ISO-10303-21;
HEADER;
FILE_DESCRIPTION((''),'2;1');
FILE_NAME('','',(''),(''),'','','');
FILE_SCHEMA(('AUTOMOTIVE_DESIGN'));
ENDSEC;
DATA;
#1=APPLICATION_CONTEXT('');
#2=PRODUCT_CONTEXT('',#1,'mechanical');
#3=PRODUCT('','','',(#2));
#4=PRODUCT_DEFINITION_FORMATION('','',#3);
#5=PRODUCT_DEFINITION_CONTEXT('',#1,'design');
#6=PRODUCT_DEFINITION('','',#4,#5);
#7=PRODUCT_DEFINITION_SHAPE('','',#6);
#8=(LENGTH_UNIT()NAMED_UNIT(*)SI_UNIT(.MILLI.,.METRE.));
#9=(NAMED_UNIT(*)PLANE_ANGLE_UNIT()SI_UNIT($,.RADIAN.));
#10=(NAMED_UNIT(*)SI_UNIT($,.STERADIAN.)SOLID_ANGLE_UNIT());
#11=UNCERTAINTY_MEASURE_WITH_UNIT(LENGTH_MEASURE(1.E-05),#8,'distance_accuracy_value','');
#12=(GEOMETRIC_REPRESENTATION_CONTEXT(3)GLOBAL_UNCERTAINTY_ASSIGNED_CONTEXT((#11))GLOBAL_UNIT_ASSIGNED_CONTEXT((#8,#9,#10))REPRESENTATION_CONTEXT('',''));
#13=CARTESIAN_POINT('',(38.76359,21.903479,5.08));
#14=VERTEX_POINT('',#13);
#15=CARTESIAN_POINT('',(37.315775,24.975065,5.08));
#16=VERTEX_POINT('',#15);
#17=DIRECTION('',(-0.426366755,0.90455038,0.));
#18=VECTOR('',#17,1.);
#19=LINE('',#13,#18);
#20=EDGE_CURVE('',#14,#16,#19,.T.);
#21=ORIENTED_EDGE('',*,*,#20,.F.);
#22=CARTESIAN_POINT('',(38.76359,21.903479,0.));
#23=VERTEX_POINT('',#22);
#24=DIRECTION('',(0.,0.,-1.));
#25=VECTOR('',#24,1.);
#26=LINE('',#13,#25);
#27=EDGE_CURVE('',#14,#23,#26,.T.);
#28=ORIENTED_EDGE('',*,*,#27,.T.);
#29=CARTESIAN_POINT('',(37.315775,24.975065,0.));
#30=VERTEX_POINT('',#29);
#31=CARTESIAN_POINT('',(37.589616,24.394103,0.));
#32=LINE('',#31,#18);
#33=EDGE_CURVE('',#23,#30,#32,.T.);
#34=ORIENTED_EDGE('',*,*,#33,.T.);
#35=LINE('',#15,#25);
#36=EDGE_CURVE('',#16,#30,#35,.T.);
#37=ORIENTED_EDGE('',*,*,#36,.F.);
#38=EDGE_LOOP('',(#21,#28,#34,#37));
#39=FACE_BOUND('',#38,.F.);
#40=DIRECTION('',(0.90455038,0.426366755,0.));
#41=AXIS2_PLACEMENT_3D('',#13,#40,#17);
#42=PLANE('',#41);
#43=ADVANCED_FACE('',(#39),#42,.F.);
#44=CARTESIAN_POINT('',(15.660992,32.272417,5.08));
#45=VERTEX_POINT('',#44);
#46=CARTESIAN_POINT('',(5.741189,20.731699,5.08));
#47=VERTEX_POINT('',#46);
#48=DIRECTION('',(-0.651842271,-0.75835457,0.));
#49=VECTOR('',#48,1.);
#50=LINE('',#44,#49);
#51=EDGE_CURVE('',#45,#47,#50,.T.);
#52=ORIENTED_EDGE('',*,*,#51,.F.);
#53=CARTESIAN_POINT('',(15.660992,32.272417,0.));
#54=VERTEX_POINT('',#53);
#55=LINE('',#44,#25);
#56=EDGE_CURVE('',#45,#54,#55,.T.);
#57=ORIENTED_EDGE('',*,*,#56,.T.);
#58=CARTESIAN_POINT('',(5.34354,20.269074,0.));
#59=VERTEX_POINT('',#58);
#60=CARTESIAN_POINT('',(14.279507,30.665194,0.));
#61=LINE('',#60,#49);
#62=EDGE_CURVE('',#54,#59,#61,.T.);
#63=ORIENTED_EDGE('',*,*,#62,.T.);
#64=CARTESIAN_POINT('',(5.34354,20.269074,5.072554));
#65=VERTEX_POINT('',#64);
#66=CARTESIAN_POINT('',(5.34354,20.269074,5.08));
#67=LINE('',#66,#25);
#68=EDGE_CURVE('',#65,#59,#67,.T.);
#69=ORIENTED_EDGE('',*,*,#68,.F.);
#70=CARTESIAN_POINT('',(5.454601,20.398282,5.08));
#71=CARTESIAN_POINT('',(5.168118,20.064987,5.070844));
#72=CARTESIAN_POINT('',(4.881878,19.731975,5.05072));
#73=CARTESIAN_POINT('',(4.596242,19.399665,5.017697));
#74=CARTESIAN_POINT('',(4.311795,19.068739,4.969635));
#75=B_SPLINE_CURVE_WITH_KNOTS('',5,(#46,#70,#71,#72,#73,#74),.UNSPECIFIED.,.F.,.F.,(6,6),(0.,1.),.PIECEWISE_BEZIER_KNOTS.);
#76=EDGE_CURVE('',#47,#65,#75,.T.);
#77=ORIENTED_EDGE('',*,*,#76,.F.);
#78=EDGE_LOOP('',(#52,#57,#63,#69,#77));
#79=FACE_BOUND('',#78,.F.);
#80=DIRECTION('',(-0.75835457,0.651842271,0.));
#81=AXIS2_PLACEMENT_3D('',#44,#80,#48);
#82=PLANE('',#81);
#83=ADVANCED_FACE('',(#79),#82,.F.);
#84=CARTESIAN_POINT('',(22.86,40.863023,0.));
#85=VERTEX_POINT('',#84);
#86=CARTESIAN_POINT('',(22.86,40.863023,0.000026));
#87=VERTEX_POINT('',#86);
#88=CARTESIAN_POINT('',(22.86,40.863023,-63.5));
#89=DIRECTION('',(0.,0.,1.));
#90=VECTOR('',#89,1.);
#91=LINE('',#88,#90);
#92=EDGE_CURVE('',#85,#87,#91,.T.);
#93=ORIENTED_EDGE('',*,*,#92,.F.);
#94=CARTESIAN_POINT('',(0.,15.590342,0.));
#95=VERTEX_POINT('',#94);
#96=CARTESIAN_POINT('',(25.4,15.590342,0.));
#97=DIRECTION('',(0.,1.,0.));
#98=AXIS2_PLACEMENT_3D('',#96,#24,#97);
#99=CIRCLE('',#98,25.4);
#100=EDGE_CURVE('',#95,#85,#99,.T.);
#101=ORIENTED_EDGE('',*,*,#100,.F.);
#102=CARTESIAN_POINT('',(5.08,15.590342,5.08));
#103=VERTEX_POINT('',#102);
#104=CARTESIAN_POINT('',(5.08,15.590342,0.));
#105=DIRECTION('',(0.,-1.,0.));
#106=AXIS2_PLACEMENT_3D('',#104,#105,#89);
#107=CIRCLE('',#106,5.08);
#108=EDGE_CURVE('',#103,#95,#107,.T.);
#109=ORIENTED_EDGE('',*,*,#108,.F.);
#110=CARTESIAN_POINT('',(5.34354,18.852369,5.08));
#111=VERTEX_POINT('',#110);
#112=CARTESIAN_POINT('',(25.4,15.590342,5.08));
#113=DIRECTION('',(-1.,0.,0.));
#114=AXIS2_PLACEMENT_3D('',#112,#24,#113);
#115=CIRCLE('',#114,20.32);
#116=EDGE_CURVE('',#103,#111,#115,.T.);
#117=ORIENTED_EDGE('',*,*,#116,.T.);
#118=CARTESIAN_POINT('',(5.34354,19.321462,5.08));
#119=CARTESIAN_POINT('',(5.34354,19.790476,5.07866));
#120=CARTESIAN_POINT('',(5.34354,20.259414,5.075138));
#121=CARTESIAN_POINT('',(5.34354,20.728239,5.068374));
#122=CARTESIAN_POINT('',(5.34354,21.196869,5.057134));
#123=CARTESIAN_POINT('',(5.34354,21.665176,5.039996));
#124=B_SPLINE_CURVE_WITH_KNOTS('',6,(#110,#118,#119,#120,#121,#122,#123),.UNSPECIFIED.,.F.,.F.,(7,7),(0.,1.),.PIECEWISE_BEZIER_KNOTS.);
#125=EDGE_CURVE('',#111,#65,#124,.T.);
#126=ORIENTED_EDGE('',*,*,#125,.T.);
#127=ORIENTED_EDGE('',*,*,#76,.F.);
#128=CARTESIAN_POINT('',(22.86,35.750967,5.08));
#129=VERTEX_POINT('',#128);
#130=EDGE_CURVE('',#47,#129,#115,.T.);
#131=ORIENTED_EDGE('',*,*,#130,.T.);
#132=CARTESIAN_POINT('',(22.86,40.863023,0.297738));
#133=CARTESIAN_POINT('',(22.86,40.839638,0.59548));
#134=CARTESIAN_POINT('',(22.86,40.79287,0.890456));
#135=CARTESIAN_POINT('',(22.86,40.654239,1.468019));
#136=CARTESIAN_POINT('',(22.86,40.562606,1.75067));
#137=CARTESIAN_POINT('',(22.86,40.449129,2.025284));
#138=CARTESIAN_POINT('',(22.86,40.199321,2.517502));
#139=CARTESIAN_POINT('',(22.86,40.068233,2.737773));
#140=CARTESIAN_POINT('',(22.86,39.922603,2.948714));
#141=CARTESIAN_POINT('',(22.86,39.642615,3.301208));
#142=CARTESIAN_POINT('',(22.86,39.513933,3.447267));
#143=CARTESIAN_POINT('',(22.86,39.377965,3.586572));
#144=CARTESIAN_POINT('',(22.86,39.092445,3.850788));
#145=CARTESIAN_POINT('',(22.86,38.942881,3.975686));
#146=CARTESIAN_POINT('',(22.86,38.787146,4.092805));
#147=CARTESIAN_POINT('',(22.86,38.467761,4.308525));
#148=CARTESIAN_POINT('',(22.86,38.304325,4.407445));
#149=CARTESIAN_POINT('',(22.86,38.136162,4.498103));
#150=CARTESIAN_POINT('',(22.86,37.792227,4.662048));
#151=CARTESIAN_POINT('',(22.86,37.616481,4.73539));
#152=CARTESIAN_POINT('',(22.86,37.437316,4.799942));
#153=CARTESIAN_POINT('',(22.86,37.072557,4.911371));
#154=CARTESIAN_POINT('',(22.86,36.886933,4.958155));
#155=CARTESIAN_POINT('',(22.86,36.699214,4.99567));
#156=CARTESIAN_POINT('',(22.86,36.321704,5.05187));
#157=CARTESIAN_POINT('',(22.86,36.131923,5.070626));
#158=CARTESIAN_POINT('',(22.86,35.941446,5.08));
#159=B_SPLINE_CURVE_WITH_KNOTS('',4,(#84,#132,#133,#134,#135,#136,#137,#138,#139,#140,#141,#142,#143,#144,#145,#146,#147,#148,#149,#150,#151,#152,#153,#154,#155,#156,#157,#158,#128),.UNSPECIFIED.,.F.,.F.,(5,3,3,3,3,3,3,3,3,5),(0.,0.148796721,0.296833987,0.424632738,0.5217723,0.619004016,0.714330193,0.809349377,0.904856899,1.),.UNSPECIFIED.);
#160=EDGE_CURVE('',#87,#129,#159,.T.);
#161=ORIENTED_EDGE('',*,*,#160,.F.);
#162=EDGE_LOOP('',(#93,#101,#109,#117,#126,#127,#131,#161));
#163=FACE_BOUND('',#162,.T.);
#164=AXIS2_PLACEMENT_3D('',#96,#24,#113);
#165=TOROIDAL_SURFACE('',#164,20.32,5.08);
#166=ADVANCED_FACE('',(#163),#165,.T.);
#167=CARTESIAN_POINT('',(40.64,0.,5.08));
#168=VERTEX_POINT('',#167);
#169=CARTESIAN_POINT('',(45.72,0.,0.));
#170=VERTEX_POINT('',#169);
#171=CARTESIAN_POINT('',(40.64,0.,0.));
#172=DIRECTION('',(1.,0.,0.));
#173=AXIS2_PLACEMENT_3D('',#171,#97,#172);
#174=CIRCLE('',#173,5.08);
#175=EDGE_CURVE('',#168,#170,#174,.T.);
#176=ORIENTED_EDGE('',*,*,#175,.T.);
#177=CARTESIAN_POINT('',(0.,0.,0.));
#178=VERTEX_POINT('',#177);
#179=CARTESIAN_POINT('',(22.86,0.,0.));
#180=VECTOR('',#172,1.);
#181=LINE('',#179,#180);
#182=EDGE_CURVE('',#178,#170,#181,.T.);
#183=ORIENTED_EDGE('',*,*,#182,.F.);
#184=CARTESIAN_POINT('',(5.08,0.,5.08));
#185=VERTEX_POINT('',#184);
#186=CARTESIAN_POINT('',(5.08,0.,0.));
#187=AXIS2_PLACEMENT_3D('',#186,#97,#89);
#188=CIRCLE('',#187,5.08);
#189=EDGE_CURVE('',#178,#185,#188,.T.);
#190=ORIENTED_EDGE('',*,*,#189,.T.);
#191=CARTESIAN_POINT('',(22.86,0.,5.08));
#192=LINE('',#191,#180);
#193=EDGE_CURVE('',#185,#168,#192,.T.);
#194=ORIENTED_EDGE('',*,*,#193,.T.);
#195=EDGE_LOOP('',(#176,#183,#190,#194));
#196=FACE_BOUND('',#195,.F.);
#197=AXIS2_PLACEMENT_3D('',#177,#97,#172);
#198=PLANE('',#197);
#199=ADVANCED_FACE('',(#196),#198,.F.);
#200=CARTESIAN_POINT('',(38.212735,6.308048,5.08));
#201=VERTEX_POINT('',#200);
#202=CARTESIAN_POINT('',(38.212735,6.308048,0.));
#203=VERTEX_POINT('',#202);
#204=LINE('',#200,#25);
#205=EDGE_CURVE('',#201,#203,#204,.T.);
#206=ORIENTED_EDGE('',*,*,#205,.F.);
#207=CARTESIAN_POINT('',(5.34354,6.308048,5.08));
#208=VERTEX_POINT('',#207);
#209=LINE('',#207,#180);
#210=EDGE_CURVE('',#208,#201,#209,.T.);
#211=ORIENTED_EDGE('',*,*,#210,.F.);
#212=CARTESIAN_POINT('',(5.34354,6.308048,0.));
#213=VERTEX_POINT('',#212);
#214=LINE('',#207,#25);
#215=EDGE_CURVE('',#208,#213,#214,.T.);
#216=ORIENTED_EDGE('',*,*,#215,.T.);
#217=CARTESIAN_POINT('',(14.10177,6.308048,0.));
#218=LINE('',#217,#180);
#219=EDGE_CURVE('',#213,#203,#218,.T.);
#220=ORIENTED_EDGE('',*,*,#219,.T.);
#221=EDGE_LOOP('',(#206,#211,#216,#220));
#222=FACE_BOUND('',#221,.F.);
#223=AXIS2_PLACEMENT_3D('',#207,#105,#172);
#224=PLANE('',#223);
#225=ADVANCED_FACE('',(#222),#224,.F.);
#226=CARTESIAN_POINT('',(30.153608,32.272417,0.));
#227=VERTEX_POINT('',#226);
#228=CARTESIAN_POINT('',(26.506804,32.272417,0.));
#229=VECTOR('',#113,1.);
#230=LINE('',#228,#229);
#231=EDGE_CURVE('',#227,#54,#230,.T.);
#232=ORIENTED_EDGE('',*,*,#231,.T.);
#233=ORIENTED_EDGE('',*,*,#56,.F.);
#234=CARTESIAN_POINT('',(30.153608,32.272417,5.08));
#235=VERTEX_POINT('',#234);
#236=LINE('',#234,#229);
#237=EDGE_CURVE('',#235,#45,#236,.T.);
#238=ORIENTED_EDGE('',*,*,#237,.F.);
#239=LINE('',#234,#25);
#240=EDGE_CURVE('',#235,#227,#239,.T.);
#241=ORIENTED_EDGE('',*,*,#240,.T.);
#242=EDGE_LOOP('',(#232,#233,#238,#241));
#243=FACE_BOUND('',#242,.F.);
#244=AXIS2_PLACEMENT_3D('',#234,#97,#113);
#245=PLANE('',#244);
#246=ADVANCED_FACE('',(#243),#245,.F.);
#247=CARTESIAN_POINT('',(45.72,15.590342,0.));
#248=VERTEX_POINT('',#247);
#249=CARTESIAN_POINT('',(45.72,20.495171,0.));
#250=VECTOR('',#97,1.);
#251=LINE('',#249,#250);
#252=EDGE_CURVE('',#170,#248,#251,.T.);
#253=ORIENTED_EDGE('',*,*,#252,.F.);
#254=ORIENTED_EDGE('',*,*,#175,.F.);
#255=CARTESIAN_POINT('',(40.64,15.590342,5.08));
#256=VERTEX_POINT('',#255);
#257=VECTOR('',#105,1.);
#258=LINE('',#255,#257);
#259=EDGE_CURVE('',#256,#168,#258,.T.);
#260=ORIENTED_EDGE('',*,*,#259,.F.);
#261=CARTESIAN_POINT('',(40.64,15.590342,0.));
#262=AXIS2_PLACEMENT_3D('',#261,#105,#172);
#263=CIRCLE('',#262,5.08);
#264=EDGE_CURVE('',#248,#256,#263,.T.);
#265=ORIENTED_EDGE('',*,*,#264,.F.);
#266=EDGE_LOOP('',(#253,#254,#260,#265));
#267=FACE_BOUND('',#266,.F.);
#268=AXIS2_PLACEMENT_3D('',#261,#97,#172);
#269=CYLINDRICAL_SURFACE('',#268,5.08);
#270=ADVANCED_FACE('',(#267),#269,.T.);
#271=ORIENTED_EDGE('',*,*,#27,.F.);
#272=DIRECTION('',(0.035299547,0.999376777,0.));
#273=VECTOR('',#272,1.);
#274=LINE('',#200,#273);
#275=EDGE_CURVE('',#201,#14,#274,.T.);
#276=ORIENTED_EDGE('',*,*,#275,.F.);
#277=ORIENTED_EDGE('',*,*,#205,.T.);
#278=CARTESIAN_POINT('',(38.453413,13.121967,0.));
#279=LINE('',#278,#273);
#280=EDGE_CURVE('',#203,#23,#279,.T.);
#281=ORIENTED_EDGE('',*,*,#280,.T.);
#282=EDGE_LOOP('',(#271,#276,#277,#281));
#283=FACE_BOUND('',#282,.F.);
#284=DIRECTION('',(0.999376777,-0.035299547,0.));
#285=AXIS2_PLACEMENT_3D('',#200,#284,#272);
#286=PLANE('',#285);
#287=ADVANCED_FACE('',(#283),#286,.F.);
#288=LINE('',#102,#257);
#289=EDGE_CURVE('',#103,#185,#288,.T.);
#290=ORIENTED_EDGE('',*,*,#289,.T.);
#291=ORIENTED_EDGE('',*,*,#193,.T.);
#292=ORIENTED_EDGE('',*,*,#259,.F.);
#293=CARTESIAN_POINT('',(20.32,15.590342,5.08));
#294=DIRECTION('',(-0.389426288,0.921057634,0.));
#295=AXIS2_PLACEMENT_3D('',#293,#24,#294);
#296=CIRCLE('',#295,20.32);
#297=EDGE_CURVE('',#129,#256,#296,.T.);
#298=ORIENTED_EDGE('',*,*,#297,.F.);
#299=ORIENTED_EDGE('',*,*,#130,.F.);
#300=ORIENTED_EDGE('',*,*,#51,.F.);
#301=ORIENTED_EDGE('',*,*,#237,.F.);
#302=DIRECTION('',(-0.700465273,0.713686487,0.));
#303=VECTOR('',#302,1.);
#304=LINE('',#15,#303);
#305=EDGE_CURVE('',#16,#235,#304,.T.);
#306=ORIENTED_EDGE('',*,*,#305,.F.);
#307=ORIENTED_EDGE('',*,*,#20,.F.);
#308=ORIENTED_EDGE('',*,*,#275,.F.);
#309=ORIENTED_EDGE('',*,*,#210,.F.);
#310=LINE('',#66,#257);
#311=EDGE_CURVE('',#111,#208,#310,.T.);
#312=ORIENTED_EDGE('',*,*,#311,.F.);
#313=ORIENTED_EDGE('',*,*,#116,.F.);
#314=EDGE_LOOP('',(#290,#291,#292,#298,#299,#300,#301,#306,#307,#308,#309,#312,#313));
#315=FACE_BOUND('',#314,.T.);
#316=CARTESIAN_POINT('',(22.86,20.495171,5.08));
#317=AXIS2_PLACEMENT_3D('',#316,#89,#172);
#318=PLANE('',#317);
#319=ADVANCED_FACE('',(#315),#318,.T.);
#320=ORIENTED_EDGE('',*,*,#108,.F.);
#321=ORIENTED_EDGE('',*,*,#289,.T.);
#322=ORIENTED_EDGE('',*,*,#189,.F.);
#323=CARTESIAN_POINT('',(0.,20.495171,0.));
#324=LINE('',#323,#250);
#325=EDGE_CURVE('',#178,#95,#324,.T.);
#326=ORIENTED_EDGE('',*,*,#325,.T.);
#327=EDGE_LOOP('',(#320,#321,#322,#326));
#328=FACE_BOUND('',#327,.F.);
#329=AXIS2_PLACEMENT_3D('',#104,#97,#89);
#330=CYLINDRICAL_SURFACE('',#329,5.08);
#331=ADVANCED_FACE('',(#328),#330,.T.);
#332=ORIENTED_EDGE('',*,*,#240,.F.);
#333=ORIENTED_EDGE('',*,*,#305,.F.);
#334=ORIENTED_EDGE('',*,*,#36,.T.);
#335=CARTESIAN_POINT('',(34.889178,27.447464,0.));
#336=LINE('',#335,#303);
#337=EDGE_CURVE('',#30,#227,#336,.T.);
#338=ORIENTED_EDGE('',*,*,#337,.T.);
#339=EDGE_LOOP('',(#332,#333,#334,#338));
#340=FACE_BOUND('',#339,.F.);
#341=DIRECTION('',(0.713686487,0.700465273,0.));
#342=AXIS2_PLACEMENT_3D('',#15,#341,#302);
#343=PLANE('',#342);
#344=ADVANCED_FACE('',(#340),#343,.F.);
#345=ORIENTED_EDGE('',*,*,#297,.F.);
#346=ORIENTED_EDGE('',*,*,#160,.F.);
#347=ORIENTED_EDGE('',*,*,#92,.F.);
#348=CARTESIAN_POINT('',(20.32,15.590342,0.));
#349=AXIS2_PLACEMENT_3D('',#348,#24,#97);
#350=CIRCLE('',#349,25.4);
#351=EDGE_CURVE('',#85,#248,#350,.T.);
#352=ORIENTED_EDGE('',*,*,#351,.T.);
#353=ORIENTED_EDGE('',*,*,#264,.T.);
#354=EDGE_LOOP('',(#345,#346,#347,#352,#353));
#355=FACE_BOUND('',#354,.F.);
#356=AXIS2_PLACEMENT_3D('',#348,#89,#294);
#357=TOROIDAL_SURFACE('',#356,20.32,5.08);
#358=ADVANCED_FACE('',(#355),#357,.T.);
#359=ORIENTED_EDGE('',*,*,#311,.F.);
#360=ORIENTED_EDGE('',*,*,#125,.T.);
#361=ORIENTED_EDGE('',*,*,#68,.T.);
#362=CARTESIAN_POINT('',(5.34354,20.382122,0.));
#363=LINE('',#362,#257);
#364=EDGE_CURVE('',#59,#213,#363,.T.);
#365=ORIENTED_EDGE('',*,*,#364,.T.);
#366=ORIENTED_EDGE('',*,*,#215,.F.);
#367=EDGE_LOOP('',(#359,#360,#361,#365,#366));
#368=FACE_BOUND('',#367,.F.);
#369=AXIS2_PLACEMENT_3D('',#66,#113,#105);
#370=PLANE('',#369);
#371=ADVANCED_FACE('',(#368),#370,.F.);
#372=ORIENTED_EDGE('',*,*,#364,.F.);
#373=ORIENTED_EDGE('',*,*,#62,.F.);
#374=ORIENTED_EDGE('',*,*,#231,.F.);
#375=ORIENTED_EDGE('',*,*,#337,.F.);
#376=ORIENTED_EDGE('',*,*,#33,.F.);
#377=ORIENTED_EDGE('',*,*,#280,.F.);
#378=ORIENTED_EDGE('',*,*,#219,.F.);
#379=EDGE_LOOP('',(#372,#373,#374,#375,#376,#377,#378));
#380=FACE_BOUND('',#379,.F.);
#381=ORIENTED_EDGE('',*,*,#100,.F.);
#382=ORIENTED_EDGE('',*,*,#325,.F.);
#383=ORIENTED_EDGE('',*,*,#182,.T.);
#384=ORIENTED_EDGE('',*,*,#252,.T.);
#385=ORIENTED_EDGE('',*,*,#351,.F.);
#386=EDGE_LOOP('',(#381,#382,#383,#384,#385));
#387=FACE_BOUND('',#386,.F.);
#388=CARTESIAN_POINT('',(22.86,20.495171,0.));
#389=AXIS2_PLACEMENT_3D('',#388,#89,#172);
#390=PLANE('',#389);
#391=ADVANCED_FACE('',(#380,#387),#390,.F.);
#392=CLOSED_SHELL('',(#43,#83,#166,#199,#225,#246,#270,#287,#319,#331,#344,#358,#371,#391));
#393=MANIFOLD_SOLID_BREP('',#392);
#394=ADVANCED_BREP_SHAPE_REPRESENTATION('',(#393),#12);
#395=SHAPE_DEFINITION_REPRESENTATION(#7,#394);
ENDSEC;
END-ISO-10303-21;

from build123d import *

# Parameters (mm, degrees)
F0_W        = 45.72
F0_H        = 40.9903422
F1_DEPTH    = 5.08
F2_T1_DEPTH = 132.08
F4_DEPTH    = 25.4
F5_T1_DEPTH = 28.2903422
F5_T4_ANGLE = 112.9188061074
F5_T6_ANGLE = 112.9188061074


# Not quite as in the source:
# - a fillet or chamfer that OpenCascade refuses, or shapes differently, is made with other operations: its cross-section is extruded or revolved along the edge and cut away or added


with BuildPart() as f1:
    # F0 (on Top) → F1 (new body)
    with BuildSketch(Plane.XY):
        with Locations((22.86, 20.4951711)):
            Rectangle(F0_W, F0_H)
    extrude(amount=F1_DEPTH)

    # F2: fillet of radius 25.4 on 2 edges, made by hand

    # F2_s2 → F2_t1 (cut)
    with BuildSketch(Plane.XY.offset(-63.5)):
        with BuildLine():
            ThreePointArc((25.4, 40.9903422), (7.4394877579, 33.5508544421), (0, 15.5903422))
            Line((0, 15.5903422), (0, 40.9903422))
            Line((0, 40.9903422), (25.4, 40.9903422))
        make_face()
        with BuildLine():
            ThreePointArc((20.32, 40.9903422), (38.2805122421, 33.5508544421), (45.72, 15.5903422))
            Line((45.72, 15.5903422), (45.72, 40.9903422))
            Line((45.72, 40.9903422), (20.32, 40.9903422))
        make_face()
    extrude(amount=F2_T1_DEPTH, mode=Mode.SUBTRACT)

    # F3 (on face) → F4 (cut)
    with BuildSketch(Plane.XY.offset(5.08)):
        Polygon((5.343540106, 6.3080484979), (38.2127352059, 6.3080484979), (38.763590157, 21.9034794718), (37.315774709, 24.9750651419), (30.1536079496, 32.2724170983), (22.2911257297, 32.2724170983), (15.6609918922, 32.2724170983), (5.343540106, 20.2690735459), align=None)
    extrude(amount=-F4_DEPTH, mode=Mode.SUBTRACT)

    # F5: fillet of radius 5.08 on 4 edges, made by hand

    # F5_s2 → F5_t1 (cut)
    with BuildSketch(Plane.XZ.offset(-15.5903422)):
        with BuildLine():
            ThreePointArc((45.72, 0), (44.2321024484, 3.5921024484), (40.64, 5.08))
            Line((40.64, 5.08), (45.72, 5.08))
            Line((45.72, 5.08), (45.72, 0))
        make_face()
        with BuildLine():
            ThreePointArc((5.08, 5.08), (1.4878975516, 3.5921024484), (0, 0))
            Line((0, 0), (0, 5.08))
            Line((0, 5.08), (5.08, 5.08))
        make_face()
    extrude(amount=F5_T1_DEPTH, mode=Mode.SUBTRACT)

    # F5_s3 → F5_t4 (revolve, cut)
    with BuildSketch(Plane(origin=(22.8304215849, 9.6527795985, 0), x_dir=(0, 0, 1), z_dir=(-0.9210576344, -0.3894262885, 0))):
        with BuildLine():
            ThreePointArc((0, 31.8464615241), (3.5921024484, 30.3585639725), (5.08, 26.7664615241))
            Line((5.08, 26.7664615241), (5.08, 31.8464615241))
            Line((5.08, 31.8464615241), (0, 31.8464615241))
        make_face()
    revolve(axis=Axis((20.3199999999, 15.5903421999, 5.08), (0, 0, -1)), revolution_arc=F5_T4_ANGLE, mode=Mode.SUBTRACT)

    # F5_s5 → F5_t6 (revolve, cut)
    with BuildSketch(Plane.XZ.offset(-15.5903421999)):
        with BuildLine():
            ThreePointArc((5.08, 5.08), (1.4878975516, 3.5921024484), (0, 0))
            Line((0, 0), (0, 5.08))
            Line((0, 5.08), (5.08, 5.08))
        make_face()
    revolve(axis=Axis((25.4000000001, 15.5903421999, 5.08), (0, 0, -1)), revolution_arc=F5_T6_ANGLE, mode=Mode.SUBTRACT)


solid = f1.part
